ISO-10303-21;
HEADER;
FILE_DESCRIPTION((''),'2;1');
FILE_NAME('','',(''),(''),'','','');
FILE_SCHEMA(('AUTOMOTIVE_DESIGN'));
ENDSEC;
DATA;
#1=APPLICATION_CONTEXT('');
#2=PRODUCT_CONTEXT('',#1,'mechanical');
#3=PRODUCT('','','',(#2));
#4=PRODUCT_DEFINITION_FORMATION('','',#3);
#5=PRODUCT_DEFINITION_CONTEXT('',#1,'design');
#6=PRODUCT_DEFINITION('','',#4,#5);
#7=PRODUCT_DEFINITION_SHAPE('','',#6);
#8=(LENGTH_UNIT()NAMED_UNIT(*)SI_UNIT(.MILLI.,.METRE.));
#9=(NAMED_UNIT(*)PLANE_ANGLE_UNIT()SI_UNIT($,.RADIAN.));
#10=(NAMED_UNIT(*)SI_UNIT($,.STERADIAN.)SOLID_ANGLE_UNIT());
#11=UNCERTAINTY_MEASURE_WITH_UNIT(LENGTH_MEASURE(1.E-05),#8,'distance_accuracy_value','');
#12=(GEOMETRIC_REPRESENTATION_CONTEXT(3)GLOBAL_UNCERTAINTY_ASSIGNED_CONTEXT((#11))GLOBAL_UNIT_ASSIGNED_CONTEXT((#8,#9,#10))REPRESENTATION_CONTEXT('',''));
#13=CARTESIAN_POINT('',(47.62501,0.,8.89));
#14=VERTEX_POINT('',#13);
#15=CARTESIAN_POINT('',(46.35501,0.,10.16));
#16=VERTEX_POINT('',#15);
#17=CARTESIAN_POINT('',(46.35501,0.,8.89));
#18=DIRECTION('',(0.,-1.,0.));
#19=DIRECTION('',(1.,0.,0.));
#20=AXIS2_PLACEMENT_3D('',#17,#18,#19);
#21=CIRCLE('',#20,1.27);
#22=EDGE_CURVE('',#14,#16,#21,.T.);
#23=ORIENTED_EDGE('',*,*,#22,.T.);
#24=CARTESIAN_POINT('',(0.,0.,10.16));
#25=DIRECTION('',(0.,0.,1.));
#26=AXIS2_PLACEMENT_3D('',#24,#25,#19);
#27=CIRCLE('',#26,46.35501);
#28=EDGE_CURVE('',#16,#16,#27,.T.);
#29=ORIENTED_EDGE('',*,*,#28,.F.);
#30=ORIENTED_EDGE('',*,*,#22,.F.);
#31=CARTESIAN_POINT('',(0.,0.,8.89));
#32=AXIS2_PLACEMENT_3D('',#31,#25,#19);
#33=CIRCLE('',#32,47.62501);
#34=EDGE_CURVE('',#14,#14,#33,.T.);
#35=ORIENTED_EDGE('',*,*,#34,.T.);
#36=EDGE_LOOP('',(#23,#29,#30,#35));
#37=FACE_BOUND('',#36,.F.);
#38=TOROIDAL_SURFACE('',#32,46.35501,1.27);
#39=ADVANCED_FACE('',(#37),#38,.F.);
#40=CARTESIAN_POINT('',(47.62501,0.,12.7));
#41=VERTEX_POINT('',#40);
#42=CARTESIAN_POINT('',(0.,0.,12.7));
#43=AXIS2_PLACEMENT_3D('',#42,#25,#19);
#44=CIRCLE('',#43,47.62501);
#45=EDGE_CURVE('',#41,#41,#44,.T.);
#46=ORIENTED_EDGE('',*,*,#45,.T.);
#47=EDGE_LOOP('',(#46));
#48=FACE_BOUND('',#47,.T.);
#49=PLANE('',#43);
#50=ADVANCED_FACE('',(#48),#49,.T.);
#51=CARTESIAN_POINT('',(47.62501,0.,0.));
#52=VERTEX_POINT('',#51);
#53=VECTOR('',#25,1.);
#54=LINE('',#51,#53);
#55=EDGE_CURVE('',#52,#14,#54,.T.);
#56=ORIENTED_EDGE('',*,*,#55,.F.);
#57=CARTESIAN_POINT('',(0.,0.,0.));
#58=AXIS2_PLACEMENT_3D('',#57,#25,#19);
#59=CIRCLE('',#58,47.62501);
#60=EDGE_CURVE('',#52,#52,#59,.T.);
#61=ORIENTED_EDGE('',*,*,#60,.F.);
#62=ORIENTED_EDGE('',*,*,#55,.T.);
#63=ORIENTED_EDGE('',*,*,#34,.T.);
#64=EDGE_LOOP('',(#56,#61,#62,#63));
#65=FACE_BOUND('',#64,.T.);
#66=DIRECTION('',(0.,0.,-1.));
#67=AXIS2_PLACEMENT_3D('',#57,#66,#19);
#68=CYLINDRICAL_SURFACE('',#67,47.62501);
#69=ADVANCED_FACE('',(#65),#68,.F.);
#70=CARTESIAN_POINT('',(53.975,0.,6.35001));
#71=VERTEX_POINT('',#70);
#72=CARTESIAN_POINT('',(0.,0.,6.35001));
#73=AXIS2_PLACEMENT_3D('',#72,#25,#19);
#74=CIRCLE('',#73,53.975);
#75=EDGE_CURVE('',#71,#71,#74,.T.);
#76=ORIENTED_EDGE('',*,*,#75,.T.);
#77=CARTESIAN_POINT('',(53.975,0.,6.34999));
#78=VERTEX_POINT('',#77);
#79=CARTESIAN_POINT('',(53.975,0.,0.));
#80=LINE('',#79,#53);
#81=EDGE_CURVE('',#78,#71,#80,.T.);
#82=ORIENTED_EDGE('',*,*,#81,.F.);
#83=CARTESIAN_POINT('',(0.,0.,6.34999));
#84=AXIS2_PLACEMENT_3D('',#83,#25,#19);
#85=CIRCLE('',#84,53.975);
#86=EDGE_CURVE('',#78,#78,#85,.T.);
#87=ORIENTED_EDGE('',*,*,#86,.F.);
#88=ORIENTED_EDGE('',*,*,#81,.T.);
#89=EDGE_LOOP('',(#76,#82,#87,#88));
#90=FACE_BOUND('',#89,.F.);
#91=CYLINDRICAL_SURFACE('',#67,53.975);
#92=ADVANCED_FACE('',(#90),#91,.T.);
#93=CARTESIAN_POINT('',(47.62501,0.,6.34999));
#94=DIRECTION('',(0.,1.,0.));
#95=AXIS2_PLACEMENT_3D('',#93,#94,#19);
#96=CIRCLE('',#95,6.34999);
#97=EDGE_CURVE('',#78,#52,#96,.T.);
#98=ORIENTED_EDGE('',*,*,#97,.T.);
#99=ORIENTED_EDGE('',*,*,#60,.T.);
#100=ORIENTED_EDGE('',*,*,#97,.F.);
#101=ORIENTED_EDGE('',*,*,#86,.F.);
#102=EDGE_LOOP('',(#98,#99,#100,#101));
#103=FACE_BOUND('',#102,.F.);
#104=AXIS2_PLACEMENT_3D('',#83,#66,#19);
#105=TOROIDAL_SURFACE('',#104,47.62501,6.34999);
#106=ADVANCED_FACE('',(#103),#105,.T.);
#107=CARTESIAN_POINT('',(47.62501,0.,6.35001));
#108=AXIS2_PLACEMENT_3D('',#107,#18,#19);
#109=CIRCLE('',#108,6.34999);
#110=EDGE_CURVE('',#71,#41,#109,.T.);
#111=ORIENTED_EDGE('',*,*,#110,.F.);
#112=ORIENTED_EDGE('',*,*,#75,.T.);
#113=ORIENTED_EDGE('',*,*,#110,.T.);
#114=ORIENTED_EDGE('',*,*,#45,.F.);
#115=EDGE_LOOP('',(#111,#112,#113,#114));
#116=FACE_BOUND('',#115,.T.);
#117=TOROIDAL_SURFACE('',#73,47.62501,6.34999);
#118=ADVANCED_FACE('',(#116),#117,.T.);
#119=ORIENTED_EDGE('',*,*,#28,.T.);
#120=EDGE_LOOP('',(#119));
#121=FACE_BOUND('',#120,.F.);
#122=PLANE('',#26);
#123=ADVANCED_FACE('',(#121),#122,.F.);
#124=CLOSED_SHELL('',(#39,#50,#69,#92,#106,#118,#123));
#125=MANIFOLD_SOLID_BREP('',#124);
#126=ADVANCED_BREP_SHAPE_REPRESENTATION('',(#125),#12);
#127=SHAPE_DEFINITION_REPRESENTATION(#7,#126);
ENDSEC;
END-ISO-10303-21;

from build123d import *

# Parameters (mm, degrees)
F0_R     = 53.975
F1_DEPTH = 12.7
F2_R     = 6.34999
F3_DEPTH = 10.16
F4_R     = 1.27


# Not quite as in the source:
# - a fillet or chamfer is up to 0.001 mm smaller than in the source, because OpenCascade refuses the exact size


with BuildPart() as f1:
    # F0 (on Top) → F1 (new body)
    with BuildSketch(Plane.XY):
        Circle(F0_R)
    extrude(amount=F1_DEPTH)

    # F2 (radius 6.35 in the source; OpenCascade refuses exactly that, so slightly less here)
    f2_edges = [f1.edges().sort_by_distance(p)[0] for p in [
        (53.975, 0, 6.35),
        (-53.975, 0, 0),
        (-53.975, 0, 12.7),
    ]]
    fillet(f2_edges, radius=F2_R)

    # F3 (cut): a face of the model
    f3_faces = [f1.faces().sort_by_distance(p)[0] for p in [
        (0, 0, 0),
    ]]
    extrude(f3_faces, amount=-F3_DEPTH, mode=Mode.SUBTRACT)

    # F4
    f4_edges = [f1.edges().sort_by_distance(p)[0] for p in [
        (-47.62501, 0, 10.16),
    ]]
    fillet(f4_edges, radius=F4_R)


solid = f1.part
